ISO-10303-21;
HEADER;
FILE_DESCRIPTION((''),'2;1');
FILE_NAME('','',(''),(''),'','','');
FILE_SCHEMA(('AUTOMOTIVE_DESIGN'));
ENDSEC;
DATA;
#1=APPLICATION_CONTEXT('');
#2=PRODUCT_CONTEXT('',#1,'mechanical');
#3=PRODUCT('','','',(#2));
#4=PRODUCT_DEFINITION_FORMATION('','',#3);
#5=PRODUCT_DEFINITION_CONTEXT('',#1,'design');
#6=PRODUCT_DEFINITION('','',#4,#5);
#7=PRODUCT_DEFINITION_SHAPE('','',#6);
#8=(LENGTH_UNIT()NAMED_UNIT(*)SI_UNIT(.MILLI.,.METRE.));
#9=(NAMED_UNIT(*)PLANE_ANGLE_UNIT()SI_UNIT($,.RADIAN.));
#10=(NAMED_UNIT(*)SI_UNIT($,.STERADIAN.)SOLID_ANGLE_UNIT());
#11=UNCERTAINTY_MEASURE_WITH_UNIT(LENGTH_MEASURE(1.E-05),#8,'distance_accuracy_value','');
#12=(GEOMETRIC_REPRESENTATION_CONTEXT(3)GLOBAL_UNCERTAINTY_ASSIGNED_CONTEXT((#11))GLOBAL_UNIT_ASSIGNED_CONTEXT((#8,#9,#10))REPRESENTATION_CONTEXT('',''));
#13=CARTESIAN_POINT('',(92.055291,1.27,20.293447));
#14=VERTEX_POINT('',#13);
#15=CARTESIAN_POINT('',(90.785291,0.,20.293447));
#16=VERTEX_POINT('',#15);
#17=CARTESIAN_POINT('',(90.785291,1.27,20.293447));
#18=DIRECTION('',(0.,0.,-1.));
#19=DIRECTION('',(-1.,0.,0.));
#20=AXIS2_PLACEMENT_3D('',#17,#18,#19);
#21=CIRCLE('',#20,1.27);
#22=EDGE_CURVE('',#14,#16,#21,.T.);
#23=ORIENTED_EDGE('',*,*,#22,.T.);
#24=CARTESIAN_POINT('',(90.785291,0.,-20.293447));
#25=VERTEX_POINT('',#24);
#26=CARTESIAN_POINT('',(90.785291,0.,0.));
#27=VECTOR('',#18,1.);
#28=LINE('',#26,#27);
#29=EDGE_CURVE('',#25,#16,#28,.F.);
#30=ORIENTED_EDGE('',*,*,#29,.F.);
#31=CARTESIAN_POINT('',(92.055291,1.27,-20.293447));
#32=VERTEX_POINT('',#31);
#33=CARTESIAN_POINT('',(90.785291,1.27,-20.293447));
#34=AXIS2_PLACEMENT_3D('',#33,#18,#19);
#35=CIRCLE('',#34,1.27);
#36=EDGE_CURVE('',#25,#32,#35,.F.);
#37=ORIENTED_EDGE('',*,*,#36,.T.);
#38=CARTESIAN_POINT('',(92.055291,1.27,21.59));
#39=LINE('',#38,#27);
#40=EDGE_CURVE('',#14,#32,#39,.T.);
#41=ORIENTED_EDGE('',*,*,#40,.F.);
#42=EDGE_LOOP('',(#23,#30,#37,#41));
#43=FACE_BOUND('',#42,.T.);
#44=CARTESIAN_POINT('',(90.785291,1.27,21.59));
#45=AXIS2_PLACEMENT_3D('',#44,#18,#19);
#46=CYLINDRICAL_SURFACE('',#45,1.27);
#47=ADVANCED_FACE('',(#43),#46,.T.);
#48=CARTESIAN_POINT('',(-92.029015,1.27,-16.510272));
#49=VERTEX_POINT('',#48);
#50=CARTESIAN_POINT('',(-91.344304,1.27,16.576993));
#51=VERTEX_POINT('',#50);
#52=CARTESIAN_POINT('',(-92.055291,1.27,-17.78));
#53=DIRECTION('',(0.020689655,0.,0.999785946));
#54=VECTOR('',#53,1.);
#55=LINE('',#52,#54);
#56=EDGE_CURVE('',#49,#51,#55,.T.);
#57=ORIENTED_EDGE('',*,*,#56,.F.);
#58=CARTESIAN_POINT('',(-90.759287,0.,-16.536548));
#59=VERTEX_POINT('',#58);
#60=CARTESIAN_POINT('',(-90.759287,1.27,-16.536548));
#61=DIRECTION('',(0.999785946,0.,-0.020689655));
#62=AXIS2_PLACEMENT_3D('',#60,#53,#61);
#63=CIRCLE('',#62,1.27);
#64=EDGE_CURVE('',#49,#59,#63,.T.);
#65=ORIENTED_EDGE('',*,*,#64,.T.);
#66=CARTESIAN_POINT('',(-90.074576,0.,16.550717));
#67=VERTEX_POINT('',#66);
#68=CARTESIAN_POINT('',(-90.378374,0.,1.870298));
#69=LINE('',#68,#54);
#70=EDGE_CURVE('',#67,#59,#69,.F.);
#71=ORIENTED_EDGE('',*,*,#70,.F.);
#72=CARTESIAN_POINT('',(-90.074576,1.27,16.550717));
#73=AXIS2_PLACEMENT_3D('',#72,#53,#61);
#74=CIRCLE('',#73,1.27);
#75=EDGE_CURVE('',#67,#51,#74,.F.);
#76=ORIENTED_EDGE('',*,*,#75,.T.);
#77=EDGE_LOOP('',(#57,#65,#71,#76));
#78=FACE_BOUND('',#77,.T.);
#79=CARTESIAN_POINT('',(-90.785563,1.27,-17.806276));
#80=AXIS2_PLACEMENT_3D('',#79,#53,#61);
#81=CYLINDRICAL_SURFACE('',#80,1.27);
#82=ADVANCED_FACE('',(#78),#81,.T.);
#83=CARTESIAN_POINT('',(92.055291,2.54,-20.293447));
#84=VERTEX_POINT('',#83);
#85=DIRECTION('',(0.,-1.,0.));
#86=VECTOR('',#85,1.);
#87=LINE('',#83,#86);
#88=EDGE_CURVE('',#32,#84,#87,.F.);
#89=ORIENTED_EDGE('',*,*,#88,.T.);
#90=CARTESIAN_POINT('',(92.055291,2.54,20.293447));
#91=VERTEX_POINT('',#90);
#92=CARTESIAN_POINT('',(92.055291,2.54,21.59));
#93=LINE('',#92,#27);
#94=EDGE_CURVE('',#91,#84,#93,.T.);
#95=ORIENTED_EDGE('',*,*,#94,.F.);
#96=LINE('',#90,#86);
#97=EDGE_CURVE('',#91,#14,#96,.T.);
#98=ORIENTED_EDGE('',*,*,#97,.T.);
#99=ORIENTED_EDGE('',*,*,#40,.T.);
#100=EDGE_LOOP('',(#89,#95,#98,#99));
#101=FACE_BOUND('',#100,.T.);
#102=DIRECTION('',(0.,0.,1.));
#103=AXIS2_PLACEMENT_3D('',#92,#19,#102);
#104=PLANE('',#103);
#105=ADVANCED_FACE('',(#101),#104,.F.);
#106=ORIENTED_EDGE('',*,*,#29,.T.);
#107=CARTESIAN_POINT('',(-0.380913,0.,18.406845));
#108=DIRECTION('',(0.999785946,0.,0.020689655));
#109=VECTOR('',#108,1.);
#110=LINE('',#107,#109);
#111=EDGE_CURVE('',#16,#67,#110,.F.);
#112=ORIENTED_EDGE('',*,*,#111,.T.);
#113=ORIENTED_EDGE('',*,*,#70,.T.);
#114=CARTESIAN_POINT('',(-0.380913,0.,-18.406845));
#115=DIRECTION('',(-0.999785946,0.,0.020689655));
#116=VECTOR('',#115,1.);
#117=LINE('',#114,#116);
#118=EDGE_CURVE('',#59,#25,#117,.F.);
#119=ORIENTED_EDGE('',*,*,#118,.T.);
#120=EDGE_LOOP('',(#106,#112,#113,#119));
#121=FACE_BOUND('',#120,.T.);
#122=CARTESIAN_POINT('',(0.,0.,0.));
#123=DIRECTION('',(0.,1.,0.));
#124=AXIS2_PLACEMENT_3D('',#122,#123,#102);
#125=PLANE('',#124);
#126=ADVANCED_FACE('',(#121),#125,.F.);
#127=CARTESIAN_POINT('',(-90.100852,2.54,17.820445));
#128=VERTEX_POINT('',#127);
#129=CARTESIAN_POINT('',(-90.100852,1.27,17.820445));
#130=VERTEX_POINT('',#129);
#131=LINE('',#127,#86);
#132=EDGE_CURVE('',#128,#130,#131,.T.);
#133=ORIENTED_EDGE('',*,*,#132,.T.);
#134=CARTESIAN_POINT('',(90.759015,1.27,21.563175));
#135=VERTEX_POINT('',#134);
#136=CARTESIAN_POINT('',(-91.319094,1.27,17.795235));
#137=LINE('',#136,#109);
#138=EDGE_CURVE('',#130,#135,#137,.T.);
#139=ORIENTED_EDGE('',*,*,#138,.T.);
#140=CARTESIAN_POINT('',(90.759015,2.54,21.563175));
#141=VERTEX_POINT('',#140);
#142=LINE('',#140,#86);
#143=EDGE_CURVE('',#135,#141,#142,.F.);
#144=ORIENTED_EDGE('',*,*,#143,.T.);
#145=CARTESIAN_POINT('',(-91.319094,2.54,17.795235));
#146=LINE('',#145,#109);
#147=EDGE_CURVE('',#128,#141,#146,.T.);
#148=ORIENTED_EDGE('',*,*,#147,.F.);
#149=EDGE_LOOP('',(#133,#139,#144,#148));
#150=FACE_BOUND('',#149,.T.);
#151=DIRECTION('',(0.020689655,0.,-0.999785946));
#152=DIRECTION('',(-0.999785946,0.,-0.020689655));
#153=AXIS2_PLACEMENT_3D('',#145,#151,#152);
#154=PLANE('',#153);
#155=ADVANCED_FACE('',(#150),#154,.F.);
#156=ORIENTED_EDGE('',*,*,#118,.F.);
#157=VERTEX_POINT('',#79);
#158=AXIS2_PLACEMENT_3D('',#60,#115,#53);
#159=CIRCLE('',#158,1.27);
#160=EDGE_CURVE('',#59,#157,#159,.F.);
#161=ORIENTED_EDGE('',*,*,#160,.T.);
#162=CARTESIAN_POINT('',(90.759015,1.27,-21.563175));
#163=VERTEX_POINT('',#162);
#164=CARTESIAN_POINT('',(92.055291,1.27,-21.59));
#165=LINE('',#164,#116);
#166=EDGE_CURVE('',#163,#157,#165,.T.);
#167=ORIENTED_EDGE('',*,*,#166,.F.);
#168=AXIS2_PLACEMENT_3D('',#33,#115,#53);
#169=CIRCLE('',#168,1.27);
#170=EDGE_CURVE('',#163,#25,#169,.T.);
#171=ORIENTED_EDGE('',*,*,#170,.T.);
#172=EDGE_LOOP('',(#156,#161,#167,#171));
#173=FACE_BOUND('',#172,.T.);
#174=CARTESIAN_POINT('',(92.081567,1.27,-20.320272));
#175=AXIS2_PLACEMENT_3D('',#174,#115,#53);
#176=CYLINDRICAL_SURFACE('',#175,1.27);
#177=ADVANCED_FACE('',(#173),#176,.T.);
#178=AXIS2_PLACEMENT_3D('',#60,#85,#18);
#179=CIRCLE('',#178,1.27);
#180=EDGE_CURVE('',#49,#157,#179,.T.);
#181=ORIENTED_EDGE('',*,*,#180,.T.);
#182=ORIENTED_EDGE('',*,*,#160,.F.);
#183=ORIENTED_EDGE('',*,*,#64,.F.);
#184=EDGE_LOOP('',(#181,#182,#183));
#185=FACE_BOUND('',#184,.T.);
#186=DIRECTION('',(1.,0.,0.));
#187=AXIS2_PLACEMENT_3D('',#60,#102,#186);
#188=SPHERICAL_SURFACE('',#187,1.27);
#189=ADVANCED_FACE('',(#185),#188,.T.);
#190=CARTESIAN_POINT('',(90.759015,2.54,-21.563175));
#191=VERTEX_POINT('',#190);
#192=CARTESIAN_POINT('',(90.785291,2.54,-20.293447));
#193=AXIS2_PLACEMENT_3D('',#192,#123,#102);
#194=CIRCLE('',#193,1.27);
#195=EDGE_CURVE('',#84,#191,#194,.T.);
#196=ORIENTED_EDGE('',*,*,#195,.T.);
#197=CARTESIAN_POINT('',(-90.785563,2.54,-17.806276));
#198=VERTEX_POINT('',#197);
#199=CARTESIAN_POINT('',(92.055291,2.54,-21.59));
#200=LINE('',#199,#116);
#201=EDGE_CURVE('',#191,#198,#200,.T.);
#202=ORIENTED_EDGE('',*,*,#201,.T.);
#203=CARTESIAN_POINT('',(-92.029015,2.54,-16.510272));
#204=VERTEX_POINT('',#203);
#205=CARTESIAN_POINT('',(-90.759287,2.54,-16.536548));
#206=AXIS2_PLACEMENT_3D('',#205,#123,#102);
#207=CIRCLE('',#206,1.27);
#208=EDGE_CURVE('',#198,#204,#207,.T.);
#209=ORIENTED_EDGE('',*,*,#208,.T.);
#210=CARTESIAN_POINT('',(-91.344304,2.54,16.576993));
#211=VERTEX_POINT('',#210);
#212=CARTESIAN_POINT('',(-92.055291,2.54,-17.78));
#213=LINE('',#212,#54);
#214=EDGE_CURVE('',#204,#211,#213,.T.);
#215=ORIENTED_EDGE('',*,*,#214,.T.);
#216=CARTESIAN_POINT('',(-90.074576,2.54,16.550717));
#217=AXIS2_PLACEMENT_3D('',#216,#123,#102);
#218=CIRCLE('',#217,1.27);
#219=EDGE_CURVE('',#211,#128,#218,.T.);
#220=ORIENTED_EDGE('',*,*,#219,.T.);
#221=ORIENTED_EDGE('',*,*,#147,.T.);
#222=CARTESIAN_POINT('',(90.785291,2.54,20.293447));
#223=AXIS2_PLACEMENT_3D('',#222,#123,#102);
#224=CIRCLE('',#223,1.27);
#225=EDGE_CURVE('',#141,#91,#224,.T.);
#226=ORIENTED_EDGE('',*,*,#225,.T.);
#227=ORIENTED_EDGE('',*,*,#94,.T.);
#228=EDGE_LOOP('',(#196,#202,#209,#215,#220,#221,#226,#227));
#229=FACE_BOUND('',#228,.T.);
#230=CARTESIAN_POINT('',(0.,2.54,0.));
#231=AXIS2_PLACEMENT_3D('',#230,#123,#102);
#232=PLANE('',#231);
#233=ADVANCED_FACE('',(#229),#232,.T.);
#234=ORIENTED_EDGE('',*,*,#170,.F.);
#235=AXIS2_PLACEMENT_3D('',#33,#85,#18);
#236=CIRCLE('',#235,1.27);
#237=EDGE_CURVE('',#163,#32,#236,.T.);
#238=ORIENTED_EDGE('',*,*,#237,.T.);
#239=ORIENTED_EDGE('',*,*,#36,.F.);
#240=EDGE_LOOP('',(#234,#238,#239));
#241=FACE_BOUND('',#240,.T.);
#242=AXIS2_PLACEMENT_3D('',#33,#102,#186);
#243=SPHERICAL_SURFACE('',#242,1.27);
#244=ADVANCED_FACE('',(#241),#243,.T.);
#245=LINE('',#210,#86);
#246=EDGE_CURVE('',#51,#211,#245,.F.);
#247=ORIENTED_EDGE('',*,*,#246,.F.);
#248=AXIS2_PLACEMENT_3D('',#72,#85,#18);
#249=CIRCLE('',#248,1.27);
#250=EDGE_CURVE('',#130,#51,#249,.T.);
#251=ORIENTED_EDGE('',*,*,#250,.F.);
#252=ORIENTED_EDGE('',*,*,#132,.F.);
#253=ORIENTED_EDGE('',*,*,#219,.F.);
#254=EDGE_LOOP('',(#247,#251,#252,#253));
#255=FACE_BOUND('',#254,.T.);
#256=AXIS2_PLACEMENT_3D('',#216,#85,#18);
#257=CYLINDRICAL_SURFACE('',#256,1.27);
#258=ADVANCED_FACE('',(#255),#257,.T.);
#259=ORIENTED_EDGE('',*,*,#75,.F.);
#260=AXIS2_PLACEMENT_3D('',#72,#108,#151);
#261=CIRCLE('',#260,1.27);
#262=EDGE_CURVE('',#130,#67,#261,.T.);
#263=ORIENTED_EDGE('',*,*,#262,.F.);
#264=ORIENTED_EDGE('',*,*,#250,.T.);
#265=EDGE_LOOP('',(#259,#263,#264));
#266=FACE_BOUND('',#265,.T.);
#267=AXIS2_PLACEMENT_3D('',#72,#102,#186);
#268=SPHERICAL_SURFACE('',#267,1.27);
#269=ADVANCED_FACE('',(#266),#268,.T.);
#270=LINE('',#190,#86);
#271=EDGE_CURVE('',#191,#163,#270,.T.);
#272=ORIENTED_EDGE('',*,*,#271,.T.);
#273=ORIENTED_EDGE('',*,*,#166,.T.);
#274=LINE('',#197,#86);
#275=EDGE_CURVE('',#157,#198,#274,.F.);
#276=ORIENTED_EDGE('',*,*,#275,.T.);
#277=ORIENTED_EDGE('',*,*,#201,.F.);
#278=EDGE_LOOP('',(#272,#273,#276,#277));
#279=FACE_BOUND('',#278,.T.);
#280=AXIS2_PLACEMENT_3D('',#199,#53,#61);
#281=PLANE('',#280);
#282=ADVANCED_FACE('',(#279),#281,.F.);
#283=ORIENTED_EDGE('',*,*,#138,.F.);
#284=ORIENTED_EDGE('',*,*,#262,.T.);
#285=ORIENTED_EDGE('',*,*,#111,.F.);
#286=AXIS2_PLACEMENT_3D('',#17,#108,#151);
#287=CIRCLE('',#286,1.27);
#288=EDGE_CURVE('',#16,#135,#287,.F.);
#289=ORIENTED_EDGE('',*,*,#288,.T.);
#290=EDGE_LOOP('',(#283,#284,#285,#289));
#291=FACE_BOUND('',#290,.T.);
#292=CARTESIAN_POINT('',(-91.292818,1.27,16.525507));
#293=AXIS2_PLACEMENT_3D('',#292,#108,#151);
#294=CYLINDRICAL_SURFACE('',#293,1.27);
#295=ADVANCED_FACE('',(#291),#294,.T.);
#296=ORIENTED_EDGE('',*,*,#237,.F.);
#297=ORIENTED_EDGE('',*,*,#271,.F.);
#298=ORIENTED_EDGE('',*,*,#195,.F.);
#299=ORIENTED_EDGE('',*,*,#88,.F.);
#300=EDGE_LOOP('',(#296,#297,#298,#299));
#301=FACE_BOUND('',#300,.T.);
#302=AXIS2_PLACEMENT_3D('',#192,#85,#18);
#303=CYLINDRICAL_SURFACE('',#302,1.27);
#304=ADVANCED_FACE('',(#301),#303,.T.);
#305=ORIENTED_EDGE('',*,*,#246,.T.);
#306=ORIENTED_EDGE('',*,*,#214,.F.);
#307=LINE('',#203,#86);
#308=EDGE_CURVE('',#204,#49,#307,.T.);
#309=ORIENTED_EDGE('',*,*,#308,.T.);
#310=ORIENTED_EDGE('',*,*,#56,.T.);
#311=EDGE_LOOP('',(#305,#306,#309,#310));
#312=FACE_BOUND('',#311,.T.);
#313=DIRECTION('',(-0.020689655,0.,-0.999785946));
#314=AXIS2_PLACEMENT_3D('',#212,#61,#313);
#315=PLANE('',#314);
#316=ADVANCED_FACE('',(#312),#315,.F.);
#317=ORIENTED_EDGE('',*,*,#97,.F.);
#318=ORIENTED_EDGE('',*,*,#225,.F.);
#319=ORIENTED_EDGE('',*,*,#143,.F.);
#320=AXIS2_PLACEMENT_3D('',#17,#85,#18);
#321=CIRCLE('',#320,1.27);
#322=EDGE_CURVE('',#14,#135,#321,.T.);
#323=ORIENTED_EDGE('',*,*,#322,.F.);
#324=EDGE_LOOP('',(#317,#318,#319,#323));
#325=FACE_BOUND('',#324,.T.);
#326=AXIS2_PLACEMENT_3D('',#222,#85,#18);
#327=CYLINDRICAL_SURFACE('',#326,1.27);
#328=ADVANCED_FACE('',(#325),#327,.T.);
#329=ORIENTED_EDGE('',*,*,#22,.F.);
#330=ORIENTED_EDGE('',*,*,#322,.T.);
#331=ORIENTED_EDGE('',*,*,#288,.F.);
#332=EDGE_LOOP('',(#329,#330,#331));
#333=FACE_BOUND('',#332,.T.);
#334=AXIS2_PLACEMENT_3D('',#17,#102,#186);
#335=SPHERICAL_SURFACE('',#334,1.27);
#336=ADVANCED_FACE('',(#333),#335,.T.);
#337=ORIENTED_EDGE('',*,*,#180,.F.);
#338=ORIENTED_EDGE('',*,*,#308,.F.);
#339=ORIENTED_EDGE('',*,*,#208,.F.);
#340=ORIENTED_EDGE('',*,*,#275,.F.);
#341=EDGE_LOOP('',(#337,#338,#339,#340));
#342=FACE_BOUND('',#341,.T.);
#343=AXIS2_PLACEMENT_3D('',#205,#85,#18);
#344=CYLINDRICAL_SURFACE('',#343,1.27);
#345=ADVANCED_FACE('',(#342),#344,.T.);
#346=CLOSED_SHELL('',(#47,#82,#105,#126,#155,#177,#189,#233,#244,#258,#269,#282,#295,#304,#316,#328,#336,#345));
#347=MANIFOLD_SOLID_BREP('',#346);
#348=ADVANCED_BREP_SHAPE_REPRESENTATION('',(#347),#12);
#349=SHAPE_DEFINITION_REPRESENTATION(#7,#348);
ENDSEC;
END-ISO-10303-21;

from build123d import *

# Parameters (mm, degrees)
BOSS_EXTRUDE1_DEPTH = 2.54
FILLET1_R           = 1.27
FILLET2_R           = 1.27


with BuildPart() as part:
    # Sketch1 → Boss-Extrude1 (new body)
    with BuildSketch(Plane(origin=(0, 0, 0), x_dir=(1, 0, 0), z_dir=(0, 1, 0))):
        Polygon((-92.055290994, 17.78), (-91.319094065, -17.795234922), (92.055290994, -21.59), (92.055290994, 21.59), align=None)
    extrude(amount=BOSS_EXTRUDE1_DEPTH)

    # Fillet1
    fillet1_edges = [part.edges().sort_by_distance(p)[0] for p in [
        (92.055290994, 0, 0),
        (0.368098464, 0, 19.692617461),
        (-91.68719253, 0, 0.007617461),
        (0, 0, -19.685),
    ]]
    fillet(fillet1_edges, radius=FILLET1_R)

    # Fillet2
    # the kernel refuses this fillet: 1.27 mm, written as the material it takes off along each edge
    with BuildSketch(Plane(origin=(-90.074576314, 1.27, 16.550717171), x_dir=(-0.9997859461749034, 0, 0.020689655172412804), z_dir=(0, -1, 0))) as fillet2_piece_1_section:
        Polygon((0, 0), (FILLET2_R, 0), (FILLET2_R, -FILLET2_R * 0.959450955721), (FILLET2_R * 0.0413704529452, -FILLET2_R * 0.999143876338), align=None)
    fillet2_piece_1 = extrude(amount=FILLET2_R, mode=Mode.PRIVATE)
    fillet2_piece_1 = fillet2_piece_1 - Plane(origin=(-90.074576314, 1.27, 16.550717171), x_dir=(0.7071067811865478, 0, -0.7071067811865471), z_dir=(0, -1, 0)) * Sphere(FILLET2_R, mode=Mode.PRIVATE)
    add(fillet2_piece_1, mode=Mode.SUBTRACT)
    with BuildSketch(Plane(origin=(-90.75928698, 1.27, -16.53654771), x_dir=(-0.020689655172410656, 0, -0.9997859461749034), z_dir=(-0.9997859461749034, 0, 0.020689655172412804))) as fillet2_piece_2_section:
        Polygon((0, 0), (FILLET2_R, 0), (FILLET2_R, FILLET2_R), (0, FILLET2_R), align=None)
    fillet2_piece_2 = extrude(amount=FILLET2_R, mode=Mode.PRIVATE)
    fillet2_piece_2 = fillet2_piece_2 - Plane(origin=(-90.75928698, 1.27, -16.53654771), x_dir=(0.014629795472822902, 0.7071067811865475, 0.7069554222752827), z_dir=(-0.9997859461749034, 0, 0.020689655172412804)) * Sphere(FILLET2_R, mode=Mode.PRIVATE)
    add(fillet2_piece_2, mode=Mode.SUBTRACT)
    with BuildSketch(Plane(origin=(90.785290994, 1.27, 20.293446606), x_dir=(-0.020689655172413755, 0, 0.9997859461749034), z_dir=(0, -1, 0))) as fillet2_piece_3_section:
        Polygon((0, 0), (FILLET2_R, 0), (FILLET2_R, -FILLET2_R * 1.02090818447), (-FILLET2_R * 0.0206896551724, -FILLET2_R * 0.999785946175), align=None)
    fillet2_piece_3 = extrude(amount=FILLET2_R, mode=Mode.PRIVATE)
    fillet2_piece_3 = fillet2_piece_3 - Plane(origin=(90.785290994, 1.27, 20.293446606), x_dir=(-0.6997536512329129, 0, -0.7143842296595067), z_dir=(0, -1, 0)) * Sphere(FILLET2_R, mode=Mode.PRIVATE)
    add(fillet2_piece_3, mode=Mode.SUBTRACT)
    with BuildSketch(Plane(origin=(90.785290994, 1.27, -20.293446606), x_dir=(-0.020689655172410656, 0, -0.9997859461749034), z_dir=(0, -1, 0))) as fillet2_piece_4_section:
        Polygon((0, 0), (FILLET2_R, 0), (FILLET2_R, FILLET2_R * 1.02090818447), (-FILLET2_R * 0.0206896551724, FILLET2_R * 0.999785946175), align=None)
    fillet2_piece_4 = extrude(amount=FILLET2_R, mode=Mode.PRIVATE)
    fillet2_piece_4 = fillet2_piece_4 - Plane(origin=(90.785290994, 1.27, -20.293446606), x_dir=(-0.6997536512329141, 0, 0.7143842296595057), z_dir=(0, -1, 0)) * Sphere(FILLET2_R, mode=Mode.PRIVATE)
    add(fillet2_piece_4, mode=Mode.SUBTRACT)
    with BuildSketch(Plane(origin=(92.055290994, 1.27, -21.59), x_dir=(-0.9997859461749034, 0, 0.020689655172409293), z_dir=(0, 1, 0))) as fillet2_piece_5:
        with BuildLine():
            CenterArc((FILLET2_R * 1.02090818447, FILLET2_R), FILLET2_R, 178.81448549, 91.18551451)
            Line((FILLET2_R * 0.0211222382995, FILLET2_R * 1.02068965517), (0, 0))
            Line((0, 0), (FILLET2_R * 1.02090818447, 0))
        make_face()
    extrude(amount=4.511383486, mode=Mode.SUBTRACT)
    with BuildSketch(Plane(origin=(92.055290994, 1.27, 21.59), x_dir=(-0.9997859461749034, 0, -0.020689655172415226), z_dir=(0, 1, 0))) as fillet2_piece_6:
        with BuildLine():
            CenterArc((FILLET2_R * 1.02090818447, -FILLET2_R), FILLET2_R, 90, 91.18551451)
            Line((FILLET2_R * 0.0211222382994, -FILLET2_R * 1.02068965517), (0, 0))
            Line((0, 0), (FILLET2_R * 1.02090818447, 0))
        make_face()
    extrude(amount=4.511383486, mode=Mode.SUBTRACT)
    with BuildSketch(Plane(origin=(-91.319094065, 1.27, 17.795234922), x_dir=(-0.020689655172414192, 0, -0.9997859461749034), z_dir=(0, 1, 0))) as fillet2_piece_7:
        with BuildLine():
            CenterArc((FILLET2_R * 0.959450955721, -FILLET2_R), FILLET2_R, 90, 87.62897098)
            Line((-FILLET2_R * 0.0396929206169, -FILLET2_R * 0.958629547055), (0, 0))
            Line((0, 0), (FILLET2_R * 0.959450955721, 0))
        make_face()
    extrude(amount=4.316256784, mode=Mode.SUBTRACT)
    with BuildSketch(Plane(origin=(-92.055290994, 1.27, -17.78), x_dir=(0.020689655172417935, 0, 0.9997859461749031), z_dir=(0, 1, 0))) as fillet2_piece_8:
        with BuildLine():
            CenterArc((FILLET2_R, FILLET2_R), FILLET2_R, 180, 90)
            Line((0, FILLET2_R), (0, 0))
            Line((0, 0), (FILLET2_R, 0))
        make_face()
    extrude(amount=4.445, mode=Mode.SUBTRACT)


solid = part.part
